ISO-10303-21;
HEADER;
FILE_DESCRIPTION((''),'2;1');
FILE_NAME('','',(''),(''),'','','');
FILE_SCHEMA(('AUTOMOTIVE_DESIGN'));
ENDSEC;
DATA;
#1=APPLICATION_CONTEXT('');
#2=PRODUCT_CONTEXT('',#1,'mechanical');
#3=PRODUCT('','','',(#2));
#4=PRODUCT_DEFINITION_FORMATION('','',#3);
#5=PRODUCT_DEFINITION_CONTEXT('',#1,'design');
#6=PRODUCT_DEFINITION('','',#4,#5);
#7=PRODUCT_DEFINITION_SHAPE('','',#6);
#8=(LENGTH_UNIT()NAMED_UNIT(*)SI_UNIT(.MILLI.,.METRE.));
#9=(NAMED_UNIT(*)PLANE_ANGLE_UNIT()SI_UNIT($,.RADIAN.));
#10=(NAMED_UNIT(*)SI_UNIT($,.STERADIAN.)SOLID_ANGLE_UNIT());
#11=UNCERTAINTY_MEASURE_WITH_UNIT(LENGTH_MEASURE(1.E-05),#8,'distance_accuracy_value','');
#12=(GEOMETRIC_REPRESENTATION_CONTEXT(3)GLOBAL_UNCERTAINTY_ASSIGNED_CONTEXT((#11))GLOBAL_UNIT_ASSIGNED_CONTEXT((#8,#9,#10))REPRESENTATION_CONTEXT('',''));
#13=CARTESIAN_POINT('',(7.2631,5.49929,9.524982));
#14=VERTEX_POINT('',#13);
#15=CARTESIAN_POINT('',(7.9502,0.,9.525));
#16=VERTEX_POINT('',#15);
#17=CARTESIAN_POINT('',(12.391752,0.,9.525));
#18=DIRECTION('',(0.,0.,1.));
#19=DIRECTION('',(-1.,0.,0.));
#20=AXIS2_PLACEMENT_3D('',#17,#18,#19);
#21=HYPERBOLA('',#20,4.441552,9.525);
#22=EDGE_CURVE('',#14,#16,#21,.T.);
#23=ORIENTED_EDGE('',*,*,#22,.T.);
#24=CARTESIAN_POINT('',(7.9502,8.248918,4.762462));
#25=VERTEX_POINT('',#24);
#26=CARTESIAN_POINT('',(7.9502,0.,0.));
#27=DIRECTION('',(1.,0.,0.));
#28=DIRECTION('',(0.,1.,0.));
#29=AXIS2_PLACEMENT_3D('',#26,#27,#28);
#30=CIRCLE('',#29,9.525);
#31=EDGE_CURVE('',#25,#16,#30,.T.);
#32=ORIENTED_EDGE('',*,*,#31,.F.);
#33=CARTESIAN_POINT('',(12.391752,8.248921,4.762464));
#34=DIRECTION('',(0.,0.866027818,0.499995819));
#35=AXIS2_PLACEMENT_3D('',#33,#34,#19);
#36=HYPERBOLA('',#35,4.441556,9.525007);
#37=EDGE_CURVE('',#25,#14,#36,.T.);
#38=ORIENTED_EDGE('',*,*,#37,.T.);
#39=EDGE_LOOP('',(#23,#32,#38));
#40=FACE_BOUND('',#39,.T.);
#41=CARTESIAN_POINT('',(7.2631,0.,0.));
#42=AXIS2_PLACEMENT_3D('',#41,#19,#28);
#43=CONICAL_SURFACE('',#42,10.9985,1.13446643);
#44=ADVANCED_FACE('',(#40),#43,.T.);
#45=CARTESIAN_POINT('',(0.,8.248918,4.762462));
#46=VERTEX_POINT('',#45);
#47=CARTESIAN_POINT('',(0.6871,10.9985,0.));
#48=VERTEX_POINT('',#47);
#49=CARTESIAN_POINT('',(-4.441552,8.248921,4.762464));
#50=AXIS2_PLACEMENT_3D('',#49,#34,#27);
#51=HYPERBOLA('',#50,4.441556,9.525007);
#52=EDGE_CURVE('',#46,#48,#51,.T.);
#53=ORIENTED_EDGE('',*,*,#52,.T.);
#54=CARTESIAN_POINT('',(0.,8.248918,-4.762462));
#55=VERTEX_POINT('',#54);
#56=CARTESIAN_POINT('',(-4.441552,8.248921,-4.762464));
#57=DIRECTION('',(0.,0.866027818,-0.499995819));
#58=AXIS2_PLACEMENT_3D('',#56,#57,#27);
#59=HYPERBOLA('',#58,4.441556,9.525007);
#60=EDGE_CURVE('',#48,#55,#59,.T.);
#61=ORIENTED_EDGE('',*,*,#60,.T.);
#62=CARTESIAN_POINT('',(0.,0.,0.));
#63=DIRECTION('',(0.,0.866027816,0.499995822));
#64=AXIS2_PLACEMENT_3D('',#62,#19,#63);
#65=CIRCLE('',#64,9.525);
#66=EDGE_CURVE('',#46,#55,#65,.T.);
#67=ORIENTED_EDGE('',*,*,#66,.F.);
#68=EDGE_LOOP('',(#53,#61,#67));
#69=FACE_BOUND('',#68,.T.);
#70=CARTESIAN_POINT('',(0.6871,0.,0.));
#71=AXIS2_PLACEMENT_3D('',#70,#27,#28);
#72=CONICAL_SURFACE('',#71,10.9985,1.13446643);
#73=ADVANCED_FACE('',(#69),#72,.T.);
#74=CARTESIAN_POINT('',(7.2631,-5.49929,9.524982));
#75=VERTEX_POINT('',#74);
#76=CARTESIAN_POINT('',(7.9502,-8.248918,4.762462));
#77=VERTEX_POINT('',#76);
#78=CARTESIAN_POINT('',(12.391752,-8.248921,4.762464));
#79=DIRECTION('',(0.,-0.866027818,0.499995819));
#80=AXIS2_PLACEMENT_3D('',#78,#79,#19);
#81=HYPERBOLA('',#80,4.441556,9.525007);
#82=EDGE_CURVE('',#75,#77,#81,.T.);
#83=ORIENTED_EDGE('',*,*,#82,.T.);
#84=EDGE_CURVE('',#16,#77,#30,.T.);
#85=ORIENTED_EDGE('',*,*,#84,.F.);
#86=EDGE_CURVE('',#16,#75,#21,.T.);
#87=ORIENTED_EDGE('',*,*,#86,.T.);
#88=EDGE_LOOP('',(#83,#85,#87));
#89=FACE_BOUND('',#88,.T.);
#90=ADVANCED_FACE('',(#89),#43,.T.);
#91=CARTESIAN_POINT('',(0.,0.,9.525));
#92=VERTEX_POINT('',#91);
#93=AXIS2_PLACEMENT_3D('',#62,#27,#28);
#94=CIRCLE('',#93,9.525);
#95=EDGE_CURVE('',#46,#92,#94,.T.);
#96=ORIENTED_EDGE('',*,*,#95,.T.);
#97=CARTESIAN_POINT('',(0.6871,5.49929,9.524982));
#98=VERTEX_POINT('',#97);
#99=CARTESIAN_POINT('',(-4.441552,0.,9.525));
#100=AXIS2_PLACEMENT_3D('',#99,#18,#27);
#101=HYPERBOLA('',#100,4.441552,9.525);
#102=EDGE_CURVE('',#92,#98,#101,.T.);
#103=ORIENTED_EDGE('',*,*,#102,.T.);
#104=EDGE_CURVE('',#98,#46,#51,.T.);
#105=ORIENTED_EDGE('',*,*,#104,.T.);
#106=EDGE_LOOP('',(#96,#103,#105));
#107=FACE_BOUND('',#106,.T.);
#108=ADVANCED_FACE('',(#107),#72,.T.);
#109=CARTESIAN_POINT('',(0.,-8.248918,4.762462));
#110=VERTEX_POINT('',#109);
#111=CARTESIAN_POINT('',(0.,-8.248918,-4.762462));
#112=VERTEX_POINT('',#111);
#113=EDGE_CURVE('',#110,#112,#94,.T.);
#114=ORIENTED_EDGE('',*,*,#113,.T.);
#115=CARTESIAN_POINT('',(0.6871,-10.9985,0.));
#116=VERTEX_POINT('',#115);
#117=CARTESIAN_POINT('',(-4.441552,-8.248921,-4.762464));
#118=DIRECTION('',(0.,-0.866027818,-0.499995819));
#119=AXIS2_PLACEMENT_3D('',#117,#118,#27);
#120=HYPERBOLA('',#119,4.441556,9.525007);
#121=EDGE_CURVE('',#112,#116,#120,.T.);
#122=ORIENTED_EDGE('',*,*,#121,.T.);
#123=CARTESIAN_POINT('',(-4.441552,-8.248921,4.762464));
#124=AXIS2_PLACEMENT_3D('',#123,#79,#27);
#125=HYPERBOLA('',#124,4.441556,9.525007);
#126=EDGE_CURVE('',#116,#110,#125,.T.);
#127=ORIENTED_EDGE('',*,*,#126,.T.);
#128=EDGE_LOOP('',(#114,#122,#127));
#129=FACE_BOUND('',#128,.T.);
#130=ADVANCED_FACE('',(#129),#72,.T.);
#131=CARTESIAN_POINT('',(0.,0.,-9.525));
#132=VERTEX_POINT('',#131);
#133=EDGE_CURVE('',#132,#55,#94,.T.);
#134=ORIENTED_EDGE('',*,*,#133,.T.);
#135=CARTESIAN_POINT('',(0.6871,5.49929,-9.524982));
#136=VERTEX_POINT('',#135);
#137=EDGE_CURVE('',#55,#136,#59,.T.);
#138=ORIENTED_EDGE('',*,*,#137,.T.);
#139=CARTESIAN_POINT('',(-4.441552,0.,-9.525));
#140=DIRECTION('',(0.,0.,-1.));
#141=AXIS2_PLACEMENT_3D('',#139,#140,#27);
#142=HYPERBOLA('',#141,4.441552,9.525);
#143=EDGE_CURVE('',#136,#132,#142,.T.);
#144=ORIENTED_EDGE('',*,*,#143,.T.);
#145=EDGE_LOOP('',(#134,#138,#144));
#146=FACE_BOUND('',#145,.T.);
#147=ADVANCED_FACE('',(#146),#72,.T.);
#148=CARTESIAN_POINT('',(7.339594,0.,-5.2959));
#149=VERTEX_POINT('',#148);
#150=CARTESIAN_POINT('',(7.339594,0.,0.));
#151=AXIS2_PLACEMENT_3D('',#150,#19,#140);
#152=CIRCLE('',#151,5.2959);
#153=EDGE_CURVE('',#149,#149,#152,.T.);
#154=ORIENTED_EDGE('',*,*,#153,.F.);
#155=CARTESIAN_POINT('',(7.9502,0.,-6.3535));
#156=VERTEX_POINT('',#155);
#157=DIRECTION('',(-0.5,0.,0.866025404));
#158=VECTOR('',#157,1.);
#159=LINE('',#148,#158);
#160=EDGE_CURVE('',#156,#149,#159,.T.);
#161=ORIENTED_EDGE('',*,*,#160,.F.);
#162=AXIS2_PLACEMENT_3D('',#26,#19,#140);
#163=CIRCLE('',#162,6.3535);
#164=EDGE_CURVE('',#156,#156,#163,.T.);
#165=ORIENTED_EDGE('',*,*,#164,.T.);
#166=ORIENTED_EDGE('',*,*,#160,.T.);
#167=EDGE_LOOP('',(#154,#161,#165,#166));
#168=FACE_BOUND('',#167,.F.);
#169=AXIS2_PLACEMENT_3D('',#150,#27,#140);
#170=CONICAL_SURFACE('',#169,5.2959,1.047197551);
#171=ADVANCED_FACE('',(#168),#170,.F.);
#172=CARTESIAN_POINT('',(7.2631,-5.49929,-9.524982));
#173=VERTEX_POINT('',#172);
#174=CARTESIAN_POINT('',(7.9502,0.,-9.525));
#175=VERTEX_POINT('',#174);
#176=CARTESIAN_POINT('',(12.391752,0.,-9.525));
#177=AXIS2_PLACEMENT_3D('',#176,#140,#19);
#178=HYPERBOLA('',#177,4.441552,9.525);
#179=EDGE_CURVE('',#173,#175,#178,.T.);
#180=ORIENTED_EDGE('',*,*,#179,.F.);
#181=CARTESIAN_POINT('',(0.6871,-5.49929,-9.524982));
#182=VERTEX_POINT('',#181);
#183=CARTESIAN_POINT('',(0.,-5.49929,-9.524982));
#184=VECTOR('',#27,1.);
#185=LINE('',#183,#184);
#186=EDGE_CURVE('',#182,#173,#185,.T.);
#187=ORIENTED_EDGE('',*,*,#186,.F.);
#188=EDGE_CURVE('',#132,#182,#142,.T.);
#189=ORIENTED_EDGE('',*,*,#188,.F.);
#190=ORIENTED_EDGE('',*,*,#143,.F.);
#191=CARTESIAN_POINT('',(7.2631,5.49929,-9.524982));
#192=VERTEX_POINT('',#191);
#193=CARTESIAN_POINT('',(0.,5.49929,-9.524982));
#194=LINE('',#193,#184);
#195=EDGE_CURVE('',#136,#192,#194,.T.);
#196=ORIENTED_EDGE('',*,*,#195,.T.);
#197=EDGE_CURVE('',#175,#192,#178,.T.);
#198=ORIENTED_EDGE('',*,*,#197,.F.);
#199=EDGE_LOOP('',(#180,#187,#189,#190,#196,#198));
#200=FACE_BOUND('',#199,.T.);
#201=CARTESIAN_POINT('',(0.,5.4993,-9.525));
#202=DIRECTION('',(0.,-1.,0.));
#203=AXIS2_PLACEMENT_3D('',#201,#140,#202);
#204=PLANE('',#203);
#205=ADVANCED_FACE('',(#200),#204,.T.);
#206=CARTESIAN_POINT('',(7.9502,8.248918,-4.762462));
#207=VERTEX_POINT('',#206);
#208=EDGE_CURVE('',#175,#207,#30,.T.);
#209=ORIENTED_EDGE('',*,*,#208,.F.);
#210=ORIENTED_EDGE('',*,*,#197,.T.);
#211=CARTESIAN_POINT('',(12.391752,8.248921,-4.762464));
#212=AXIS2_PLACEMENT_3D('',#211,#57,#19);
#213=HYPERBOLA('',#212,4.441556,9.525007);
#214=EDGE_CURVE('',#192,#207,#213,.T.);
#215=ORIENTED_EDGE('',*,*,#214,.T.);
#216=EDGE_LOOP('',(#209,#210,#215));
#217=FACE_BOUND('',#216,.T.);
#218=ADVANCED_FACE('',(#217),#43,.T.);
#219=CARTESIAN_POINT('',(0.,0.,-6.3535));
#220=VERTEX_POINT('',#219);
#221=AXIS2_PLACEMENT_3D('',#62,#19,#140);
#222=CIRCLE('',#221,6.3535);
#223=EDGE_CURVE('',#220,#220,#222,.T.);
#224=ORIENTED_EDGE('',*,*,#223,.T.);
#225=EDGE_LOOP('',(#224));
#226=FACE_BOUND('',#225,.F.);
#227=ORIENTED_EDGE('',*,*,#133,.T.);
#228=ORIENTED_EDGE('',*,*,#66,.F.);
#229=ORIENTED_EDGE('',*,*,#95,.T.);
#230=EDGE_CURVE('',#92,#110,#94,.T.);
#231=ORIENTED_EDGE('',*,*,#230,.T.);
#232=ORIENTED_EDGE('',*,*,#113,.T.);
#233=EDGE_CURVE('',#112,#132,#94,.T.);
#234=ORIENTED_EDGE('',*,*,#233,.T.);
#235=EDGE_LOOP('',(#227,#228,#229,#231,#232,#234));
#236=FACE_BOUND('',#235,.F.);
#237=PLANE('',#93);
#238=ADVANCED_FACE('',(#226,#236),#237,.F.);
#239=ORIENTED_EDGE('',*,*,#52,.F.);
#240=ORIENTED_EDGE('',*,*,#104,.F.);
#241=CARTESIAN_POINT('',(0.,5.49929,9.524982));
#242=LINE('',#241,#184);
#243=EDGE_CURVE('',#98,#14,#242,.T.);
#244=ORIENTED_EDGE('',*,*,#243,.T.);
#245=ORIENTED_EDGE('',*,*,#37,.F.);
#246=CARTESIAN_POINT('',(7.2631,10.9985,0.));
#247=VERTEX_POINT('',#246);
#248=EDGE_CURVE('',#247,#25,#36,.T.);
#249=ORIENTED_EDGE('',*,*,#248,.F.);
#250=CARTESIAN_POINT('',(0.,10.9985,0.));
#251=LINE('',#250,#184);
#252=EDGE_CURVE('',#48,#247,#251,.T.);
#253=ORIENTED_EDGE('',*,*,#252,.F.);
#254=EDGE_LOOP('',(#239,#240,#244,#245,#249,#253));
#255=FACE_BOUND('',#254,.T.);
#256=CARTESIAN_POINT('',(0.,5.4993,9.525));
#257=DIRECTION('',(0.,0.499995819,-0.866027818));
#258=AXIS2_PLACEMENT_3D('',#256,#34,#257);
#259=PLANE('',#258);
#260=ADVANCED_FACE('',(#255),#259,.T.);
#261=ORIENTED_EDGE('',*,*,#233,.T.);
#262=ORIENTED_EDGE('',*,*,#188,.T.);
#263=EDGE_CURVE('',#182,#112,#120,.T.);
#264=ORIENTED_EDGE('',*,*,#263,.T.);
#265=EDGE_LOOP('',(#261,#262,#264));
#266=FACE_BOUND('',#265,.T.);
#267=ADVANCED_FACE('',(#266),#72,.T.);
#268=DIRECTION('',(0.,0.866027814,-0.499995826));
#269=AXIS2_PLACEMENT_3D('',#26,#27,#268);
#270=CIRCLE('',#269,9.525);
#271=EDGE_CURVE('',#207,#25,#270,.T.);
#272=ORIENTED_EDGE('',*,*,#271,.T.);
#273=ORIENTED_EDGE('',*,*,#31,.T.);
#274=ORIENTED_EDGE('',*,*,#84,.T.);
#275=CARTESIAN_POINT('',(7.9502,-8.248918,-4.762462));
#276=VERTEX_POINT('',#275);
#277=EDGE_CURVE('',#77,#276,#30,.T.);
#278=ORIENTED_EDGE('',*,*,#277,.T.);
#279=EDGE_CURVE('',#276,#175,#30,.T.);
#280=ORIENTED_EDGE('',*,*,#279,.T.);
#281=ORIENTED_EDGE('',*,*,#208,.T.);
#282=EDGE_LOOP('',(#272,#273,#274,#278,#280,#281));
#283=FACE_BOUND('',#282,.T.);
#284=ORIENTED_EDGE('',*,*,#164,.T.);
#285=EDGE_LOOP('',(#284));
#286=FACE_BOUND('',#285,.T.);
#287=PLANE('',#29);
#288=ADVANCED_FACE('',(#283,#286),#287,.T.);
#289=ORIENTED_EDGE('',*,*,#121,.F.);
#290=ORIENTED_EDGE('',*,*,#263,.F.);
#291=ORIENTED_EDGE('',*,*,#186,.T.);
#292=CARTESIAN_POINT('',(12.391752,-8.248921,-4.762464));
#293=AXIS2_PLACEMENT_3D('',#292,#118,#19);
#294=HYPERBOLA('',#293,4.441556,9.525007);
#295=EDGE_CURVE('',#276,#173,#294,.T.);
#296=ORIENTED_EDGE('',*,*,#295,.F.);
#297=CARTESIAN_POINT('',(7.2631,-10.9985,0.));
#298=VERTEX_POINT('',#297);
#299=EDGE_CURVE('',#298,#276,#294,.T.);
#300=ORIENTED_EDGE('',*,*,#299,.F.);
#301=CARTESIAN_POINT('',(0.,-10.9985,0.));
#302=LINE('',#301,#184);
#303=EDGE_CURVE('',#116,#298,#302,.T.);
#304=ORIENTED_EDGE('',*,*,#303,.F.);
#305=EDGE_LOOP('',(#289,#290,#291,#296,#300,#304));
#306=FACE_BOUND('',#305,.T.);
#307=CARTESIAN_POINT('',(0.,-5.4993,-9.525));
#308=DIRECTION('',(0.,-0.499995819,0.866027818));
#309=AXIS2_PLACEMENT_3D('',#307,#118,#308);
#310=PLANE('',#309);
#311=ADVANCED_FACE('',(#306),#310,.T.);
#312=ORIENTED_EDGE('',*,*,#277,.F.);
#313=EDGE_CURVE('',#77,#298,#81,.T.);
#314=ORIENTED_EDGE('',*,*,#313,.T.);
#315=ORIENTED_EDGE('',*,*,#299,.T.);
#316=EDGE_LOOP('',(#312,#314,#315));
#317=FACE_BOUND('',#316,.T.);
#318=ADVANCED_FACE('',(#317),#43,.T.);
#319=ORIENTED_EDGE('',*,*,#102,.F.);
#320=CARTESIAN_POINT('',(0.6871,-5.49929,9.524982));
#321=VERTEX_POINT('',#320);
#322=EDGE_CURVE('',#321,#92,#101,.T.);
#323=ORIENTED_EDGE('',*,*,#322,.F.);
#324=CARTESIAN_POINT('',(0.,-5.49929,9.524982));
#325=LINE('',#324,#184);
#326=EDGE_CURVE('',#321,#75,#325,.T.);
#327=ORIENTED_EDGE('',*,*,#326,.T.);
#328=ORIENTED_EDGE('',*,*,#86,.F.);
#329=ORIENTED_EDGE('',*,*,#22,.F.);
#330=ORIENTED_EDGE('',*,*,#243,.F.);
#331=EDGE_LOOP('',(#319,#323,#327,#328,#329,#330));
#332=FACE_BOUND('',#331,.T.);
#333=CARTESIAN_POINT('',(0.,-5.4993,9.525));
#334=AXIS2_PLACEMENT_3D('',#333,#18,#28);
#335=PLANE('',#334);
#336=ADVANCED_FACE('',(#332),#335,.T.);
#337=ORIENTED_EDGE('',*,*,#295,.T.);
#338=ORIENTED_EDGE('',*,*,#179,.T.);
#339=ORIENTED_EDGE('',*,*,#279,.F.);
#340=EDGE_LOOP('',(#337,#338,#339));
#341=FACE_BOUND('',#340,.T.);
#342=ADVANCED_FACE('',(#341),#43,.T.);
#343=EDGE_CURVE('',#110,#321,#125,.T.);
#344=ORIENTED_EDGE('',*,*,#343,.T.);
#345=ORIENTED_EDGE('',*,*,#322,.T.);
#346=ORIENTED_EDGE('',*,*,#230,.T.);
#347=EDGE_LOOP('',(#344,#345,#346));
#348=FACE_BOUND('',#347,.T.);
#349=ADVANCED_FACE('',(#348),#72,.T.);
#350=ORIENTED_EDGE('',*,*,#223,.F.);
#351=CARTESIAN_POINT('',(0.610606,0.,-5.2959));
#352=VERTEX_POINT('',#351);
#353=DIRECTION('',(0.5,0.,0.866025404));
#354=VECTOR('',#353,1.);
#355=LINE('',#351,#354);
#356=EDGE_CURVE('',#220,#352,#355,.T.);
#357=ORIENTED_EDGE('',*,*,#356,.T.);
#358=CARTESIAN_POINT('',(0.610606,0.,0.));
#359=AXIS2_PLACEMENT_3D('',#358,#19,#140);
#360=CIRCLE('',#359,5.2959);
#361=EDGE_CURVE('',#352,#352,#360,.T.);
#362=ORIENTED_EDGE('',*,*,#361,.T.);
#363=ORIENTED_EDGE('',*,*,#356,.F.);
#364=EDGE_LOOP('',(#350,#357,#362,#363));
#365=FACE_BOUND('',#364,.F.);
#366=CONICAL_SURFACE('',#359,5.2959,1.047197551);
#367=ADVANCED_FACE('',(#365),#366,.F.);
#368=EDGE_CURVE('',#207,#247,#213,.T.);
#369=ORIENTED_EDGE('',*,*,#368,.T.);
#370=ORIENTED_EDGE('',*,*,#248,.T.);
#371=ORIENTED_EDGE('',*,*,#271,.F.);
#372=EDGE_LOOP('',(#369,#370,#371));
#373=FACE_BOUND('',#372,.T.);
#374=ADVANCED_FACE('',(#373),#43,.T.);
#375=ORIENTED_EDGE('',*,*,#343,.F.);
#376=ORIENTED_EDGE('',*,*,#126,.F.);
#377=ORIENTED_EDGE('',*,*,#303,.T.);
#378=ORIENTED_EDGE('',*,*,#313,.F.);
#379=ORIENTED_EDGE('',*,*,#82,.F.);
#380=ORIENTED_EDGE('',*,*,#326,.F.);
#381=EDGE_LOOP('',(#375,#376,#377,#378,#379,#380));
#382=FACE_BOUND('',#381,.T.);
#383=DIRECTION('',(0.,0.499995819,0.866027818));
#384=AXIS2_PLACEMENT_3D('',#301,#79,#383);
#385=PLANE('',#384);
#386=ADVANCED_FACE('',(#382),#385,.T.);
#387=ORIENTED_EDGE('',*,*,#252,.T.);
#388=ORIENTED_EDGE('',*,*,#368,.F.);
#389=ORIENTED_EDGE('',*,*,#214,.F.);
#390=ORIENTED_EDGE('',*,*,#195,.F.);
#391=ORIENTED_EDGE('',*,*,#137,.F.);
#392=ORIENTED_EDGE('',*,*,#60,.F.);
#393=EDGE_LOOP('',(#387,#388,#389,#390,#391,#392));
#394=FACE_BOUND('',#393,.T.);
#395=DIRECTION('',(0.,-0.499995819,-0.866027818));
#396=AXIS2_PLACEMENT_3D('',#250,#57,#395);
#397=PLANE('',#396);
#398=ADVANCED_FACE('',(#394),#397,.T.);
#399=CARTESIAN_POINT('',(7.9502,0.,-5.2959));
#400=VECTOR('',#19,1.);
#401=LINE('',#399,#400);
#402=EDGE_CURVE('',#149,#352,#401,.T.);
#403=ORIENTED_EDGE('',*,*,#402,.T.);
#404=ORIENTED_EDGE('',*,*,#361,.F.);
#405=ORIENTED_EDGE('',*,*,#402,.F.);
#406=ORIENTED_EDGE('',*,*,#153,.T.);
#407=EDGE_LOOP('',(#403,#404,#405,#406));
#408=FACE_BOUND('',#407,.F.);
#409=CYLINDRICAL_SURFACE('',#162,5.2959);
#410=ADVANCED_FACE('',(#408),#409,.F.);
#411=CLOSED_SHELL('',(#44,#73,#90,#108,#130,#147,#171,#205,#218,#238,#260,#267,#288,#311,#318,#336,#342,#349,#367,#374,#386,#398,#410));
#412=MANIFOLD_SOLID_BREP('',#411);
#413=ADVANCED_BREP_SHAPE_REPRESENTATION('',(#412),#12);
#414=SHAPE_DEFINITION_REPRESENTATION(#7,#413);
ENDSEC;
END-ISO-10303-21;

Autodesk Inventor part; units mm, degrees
ref_plane "YZ Plane" through (0, 0, 0) normal (1, 0, 0) x (0, 1, 0)
ref_plane "XZ Plane" through (0, 0, 0) normal (0, 1, 0) x (-1, 0, 0)
sketch "Sketch1" plane through (0, 0, 0) normal (1, 0, 0) x (0, 1, 0)
  line L0 (-10.9985, 0) -> (-5.4993, 9.525)
  line L1 (-5.4993, 9.525) -> (5.4993, 9.525)
  line L2 (5.4993, 9.525) -> (10.9985, 0)
  line L3 (10.9985, 0) -> (5.4993, -9.525)
  line L4 (5.4993, -9.525) -> (-5.4993, -9.525)
  line L5 (-5.4993, -9.525) -> (-10.9985, 0)
  point P0 (0, 0)
  point P1 (0, 0)
  dimension "d0" = 21.9971
extrude "Body" add sketch "Sketch1" along normal blind 7.9502
sketch "Sketch2" plane through (0, 0, 0) normal (0, 0, 1) x (1, 0, 0)
  line L0 (0, 5.4993) -> (0, 10.9985) projected
  line L1 (0, 10.9985) -> (7.9502, 10.9985) projected
  line L2 (7.9502, 5.4993) -> (7.9502, 10.9985) projected
  line L3 (-1.59, 0) -> (9.5402, 0) projected
  line L4 (0.6871, 10.9985) -> (0, 9.525)
  line L5 (7.2631, 10.9985) -> (7.9502, 9.525)
  dimension "d3" = 25
  dimension "d4" = 25
  dimension "d5" = 19.05
  dimension "d6" = 19.05
revolve "Chamfer1" cut sketch "Sketch2" angle 360 about axis through (-10, 0, 0) along (1, 0, 0)
sketch "Sketch3" plane through (7.9502, 0, 0) normal (1, 0, 0) x (0, 0, -1)
  arc A0 (-4.7625, -8.2489) -> (4.7625, -8.2489) centre (0, 0) ccw projected
hole "Thread" at (7.9502, 0, 0) direction (-1, 0, 0) diameter 10.5918 end through all thread size "1/2-13 UNC" class "2B" standard "ANSI Unified Screw Threads"
chamfer "Chamfer2" distance 1.0576 angle 30 1 edges at (7.9502, 0, 5.2959) measured on face at (7.9502, -8.0676, -0.2128)
chamfer "Chamfer3" distance 1.0576 angle 30 1 edges at (0, 0, 5.2959) measured on face at (0, -8.0676, -0.2128)
ref_plane "Work Plane1" through (-22.2156, 0, 0) normal (0, -0.8660254, -0.5) x (1, 0, 0)
equation "\"d0\" = 1.1547 * SW"
equation "\"d1\" = KOH"
equation "\"d3\" = ANG1"
equation "\"d4\" = ANG2"
equation "\"d5\" = SW0"
equation "\"d6\" = SW01"
equation "\"d8\" = -0.5 * GD1 + 0.5 * NND"
equation "\"d40\" = -0.5 * GD1 + 0.5 * NND"
equation "\"d10\" = -0.5 * GD1 + 0.5 * NND"
equation "\"d41\" = -0.5 * GD1 + 0.5 * NND"
equation "\"ANG1\" = 25deg"
equation "\"ANG2\" = 25deg"
equation "\"NND\" = 12.7"
equation "\"KOH\" = 7.9502"
equation "\"SW\" = 19.05"
equation "\"SW0\" = SW"
equation "\"SW01\" = SW"
equation "\"THREADDIA\" = 12.7"
equation "\"TOA\" = 30deg"
equation "\"E0\" = 1.155 * SW"
equation "\"GD1\" = 10.584899"
properties part number "ANSI B18.2.2 - 1/2 - 13, HJNI" material "Steel, Mild"
